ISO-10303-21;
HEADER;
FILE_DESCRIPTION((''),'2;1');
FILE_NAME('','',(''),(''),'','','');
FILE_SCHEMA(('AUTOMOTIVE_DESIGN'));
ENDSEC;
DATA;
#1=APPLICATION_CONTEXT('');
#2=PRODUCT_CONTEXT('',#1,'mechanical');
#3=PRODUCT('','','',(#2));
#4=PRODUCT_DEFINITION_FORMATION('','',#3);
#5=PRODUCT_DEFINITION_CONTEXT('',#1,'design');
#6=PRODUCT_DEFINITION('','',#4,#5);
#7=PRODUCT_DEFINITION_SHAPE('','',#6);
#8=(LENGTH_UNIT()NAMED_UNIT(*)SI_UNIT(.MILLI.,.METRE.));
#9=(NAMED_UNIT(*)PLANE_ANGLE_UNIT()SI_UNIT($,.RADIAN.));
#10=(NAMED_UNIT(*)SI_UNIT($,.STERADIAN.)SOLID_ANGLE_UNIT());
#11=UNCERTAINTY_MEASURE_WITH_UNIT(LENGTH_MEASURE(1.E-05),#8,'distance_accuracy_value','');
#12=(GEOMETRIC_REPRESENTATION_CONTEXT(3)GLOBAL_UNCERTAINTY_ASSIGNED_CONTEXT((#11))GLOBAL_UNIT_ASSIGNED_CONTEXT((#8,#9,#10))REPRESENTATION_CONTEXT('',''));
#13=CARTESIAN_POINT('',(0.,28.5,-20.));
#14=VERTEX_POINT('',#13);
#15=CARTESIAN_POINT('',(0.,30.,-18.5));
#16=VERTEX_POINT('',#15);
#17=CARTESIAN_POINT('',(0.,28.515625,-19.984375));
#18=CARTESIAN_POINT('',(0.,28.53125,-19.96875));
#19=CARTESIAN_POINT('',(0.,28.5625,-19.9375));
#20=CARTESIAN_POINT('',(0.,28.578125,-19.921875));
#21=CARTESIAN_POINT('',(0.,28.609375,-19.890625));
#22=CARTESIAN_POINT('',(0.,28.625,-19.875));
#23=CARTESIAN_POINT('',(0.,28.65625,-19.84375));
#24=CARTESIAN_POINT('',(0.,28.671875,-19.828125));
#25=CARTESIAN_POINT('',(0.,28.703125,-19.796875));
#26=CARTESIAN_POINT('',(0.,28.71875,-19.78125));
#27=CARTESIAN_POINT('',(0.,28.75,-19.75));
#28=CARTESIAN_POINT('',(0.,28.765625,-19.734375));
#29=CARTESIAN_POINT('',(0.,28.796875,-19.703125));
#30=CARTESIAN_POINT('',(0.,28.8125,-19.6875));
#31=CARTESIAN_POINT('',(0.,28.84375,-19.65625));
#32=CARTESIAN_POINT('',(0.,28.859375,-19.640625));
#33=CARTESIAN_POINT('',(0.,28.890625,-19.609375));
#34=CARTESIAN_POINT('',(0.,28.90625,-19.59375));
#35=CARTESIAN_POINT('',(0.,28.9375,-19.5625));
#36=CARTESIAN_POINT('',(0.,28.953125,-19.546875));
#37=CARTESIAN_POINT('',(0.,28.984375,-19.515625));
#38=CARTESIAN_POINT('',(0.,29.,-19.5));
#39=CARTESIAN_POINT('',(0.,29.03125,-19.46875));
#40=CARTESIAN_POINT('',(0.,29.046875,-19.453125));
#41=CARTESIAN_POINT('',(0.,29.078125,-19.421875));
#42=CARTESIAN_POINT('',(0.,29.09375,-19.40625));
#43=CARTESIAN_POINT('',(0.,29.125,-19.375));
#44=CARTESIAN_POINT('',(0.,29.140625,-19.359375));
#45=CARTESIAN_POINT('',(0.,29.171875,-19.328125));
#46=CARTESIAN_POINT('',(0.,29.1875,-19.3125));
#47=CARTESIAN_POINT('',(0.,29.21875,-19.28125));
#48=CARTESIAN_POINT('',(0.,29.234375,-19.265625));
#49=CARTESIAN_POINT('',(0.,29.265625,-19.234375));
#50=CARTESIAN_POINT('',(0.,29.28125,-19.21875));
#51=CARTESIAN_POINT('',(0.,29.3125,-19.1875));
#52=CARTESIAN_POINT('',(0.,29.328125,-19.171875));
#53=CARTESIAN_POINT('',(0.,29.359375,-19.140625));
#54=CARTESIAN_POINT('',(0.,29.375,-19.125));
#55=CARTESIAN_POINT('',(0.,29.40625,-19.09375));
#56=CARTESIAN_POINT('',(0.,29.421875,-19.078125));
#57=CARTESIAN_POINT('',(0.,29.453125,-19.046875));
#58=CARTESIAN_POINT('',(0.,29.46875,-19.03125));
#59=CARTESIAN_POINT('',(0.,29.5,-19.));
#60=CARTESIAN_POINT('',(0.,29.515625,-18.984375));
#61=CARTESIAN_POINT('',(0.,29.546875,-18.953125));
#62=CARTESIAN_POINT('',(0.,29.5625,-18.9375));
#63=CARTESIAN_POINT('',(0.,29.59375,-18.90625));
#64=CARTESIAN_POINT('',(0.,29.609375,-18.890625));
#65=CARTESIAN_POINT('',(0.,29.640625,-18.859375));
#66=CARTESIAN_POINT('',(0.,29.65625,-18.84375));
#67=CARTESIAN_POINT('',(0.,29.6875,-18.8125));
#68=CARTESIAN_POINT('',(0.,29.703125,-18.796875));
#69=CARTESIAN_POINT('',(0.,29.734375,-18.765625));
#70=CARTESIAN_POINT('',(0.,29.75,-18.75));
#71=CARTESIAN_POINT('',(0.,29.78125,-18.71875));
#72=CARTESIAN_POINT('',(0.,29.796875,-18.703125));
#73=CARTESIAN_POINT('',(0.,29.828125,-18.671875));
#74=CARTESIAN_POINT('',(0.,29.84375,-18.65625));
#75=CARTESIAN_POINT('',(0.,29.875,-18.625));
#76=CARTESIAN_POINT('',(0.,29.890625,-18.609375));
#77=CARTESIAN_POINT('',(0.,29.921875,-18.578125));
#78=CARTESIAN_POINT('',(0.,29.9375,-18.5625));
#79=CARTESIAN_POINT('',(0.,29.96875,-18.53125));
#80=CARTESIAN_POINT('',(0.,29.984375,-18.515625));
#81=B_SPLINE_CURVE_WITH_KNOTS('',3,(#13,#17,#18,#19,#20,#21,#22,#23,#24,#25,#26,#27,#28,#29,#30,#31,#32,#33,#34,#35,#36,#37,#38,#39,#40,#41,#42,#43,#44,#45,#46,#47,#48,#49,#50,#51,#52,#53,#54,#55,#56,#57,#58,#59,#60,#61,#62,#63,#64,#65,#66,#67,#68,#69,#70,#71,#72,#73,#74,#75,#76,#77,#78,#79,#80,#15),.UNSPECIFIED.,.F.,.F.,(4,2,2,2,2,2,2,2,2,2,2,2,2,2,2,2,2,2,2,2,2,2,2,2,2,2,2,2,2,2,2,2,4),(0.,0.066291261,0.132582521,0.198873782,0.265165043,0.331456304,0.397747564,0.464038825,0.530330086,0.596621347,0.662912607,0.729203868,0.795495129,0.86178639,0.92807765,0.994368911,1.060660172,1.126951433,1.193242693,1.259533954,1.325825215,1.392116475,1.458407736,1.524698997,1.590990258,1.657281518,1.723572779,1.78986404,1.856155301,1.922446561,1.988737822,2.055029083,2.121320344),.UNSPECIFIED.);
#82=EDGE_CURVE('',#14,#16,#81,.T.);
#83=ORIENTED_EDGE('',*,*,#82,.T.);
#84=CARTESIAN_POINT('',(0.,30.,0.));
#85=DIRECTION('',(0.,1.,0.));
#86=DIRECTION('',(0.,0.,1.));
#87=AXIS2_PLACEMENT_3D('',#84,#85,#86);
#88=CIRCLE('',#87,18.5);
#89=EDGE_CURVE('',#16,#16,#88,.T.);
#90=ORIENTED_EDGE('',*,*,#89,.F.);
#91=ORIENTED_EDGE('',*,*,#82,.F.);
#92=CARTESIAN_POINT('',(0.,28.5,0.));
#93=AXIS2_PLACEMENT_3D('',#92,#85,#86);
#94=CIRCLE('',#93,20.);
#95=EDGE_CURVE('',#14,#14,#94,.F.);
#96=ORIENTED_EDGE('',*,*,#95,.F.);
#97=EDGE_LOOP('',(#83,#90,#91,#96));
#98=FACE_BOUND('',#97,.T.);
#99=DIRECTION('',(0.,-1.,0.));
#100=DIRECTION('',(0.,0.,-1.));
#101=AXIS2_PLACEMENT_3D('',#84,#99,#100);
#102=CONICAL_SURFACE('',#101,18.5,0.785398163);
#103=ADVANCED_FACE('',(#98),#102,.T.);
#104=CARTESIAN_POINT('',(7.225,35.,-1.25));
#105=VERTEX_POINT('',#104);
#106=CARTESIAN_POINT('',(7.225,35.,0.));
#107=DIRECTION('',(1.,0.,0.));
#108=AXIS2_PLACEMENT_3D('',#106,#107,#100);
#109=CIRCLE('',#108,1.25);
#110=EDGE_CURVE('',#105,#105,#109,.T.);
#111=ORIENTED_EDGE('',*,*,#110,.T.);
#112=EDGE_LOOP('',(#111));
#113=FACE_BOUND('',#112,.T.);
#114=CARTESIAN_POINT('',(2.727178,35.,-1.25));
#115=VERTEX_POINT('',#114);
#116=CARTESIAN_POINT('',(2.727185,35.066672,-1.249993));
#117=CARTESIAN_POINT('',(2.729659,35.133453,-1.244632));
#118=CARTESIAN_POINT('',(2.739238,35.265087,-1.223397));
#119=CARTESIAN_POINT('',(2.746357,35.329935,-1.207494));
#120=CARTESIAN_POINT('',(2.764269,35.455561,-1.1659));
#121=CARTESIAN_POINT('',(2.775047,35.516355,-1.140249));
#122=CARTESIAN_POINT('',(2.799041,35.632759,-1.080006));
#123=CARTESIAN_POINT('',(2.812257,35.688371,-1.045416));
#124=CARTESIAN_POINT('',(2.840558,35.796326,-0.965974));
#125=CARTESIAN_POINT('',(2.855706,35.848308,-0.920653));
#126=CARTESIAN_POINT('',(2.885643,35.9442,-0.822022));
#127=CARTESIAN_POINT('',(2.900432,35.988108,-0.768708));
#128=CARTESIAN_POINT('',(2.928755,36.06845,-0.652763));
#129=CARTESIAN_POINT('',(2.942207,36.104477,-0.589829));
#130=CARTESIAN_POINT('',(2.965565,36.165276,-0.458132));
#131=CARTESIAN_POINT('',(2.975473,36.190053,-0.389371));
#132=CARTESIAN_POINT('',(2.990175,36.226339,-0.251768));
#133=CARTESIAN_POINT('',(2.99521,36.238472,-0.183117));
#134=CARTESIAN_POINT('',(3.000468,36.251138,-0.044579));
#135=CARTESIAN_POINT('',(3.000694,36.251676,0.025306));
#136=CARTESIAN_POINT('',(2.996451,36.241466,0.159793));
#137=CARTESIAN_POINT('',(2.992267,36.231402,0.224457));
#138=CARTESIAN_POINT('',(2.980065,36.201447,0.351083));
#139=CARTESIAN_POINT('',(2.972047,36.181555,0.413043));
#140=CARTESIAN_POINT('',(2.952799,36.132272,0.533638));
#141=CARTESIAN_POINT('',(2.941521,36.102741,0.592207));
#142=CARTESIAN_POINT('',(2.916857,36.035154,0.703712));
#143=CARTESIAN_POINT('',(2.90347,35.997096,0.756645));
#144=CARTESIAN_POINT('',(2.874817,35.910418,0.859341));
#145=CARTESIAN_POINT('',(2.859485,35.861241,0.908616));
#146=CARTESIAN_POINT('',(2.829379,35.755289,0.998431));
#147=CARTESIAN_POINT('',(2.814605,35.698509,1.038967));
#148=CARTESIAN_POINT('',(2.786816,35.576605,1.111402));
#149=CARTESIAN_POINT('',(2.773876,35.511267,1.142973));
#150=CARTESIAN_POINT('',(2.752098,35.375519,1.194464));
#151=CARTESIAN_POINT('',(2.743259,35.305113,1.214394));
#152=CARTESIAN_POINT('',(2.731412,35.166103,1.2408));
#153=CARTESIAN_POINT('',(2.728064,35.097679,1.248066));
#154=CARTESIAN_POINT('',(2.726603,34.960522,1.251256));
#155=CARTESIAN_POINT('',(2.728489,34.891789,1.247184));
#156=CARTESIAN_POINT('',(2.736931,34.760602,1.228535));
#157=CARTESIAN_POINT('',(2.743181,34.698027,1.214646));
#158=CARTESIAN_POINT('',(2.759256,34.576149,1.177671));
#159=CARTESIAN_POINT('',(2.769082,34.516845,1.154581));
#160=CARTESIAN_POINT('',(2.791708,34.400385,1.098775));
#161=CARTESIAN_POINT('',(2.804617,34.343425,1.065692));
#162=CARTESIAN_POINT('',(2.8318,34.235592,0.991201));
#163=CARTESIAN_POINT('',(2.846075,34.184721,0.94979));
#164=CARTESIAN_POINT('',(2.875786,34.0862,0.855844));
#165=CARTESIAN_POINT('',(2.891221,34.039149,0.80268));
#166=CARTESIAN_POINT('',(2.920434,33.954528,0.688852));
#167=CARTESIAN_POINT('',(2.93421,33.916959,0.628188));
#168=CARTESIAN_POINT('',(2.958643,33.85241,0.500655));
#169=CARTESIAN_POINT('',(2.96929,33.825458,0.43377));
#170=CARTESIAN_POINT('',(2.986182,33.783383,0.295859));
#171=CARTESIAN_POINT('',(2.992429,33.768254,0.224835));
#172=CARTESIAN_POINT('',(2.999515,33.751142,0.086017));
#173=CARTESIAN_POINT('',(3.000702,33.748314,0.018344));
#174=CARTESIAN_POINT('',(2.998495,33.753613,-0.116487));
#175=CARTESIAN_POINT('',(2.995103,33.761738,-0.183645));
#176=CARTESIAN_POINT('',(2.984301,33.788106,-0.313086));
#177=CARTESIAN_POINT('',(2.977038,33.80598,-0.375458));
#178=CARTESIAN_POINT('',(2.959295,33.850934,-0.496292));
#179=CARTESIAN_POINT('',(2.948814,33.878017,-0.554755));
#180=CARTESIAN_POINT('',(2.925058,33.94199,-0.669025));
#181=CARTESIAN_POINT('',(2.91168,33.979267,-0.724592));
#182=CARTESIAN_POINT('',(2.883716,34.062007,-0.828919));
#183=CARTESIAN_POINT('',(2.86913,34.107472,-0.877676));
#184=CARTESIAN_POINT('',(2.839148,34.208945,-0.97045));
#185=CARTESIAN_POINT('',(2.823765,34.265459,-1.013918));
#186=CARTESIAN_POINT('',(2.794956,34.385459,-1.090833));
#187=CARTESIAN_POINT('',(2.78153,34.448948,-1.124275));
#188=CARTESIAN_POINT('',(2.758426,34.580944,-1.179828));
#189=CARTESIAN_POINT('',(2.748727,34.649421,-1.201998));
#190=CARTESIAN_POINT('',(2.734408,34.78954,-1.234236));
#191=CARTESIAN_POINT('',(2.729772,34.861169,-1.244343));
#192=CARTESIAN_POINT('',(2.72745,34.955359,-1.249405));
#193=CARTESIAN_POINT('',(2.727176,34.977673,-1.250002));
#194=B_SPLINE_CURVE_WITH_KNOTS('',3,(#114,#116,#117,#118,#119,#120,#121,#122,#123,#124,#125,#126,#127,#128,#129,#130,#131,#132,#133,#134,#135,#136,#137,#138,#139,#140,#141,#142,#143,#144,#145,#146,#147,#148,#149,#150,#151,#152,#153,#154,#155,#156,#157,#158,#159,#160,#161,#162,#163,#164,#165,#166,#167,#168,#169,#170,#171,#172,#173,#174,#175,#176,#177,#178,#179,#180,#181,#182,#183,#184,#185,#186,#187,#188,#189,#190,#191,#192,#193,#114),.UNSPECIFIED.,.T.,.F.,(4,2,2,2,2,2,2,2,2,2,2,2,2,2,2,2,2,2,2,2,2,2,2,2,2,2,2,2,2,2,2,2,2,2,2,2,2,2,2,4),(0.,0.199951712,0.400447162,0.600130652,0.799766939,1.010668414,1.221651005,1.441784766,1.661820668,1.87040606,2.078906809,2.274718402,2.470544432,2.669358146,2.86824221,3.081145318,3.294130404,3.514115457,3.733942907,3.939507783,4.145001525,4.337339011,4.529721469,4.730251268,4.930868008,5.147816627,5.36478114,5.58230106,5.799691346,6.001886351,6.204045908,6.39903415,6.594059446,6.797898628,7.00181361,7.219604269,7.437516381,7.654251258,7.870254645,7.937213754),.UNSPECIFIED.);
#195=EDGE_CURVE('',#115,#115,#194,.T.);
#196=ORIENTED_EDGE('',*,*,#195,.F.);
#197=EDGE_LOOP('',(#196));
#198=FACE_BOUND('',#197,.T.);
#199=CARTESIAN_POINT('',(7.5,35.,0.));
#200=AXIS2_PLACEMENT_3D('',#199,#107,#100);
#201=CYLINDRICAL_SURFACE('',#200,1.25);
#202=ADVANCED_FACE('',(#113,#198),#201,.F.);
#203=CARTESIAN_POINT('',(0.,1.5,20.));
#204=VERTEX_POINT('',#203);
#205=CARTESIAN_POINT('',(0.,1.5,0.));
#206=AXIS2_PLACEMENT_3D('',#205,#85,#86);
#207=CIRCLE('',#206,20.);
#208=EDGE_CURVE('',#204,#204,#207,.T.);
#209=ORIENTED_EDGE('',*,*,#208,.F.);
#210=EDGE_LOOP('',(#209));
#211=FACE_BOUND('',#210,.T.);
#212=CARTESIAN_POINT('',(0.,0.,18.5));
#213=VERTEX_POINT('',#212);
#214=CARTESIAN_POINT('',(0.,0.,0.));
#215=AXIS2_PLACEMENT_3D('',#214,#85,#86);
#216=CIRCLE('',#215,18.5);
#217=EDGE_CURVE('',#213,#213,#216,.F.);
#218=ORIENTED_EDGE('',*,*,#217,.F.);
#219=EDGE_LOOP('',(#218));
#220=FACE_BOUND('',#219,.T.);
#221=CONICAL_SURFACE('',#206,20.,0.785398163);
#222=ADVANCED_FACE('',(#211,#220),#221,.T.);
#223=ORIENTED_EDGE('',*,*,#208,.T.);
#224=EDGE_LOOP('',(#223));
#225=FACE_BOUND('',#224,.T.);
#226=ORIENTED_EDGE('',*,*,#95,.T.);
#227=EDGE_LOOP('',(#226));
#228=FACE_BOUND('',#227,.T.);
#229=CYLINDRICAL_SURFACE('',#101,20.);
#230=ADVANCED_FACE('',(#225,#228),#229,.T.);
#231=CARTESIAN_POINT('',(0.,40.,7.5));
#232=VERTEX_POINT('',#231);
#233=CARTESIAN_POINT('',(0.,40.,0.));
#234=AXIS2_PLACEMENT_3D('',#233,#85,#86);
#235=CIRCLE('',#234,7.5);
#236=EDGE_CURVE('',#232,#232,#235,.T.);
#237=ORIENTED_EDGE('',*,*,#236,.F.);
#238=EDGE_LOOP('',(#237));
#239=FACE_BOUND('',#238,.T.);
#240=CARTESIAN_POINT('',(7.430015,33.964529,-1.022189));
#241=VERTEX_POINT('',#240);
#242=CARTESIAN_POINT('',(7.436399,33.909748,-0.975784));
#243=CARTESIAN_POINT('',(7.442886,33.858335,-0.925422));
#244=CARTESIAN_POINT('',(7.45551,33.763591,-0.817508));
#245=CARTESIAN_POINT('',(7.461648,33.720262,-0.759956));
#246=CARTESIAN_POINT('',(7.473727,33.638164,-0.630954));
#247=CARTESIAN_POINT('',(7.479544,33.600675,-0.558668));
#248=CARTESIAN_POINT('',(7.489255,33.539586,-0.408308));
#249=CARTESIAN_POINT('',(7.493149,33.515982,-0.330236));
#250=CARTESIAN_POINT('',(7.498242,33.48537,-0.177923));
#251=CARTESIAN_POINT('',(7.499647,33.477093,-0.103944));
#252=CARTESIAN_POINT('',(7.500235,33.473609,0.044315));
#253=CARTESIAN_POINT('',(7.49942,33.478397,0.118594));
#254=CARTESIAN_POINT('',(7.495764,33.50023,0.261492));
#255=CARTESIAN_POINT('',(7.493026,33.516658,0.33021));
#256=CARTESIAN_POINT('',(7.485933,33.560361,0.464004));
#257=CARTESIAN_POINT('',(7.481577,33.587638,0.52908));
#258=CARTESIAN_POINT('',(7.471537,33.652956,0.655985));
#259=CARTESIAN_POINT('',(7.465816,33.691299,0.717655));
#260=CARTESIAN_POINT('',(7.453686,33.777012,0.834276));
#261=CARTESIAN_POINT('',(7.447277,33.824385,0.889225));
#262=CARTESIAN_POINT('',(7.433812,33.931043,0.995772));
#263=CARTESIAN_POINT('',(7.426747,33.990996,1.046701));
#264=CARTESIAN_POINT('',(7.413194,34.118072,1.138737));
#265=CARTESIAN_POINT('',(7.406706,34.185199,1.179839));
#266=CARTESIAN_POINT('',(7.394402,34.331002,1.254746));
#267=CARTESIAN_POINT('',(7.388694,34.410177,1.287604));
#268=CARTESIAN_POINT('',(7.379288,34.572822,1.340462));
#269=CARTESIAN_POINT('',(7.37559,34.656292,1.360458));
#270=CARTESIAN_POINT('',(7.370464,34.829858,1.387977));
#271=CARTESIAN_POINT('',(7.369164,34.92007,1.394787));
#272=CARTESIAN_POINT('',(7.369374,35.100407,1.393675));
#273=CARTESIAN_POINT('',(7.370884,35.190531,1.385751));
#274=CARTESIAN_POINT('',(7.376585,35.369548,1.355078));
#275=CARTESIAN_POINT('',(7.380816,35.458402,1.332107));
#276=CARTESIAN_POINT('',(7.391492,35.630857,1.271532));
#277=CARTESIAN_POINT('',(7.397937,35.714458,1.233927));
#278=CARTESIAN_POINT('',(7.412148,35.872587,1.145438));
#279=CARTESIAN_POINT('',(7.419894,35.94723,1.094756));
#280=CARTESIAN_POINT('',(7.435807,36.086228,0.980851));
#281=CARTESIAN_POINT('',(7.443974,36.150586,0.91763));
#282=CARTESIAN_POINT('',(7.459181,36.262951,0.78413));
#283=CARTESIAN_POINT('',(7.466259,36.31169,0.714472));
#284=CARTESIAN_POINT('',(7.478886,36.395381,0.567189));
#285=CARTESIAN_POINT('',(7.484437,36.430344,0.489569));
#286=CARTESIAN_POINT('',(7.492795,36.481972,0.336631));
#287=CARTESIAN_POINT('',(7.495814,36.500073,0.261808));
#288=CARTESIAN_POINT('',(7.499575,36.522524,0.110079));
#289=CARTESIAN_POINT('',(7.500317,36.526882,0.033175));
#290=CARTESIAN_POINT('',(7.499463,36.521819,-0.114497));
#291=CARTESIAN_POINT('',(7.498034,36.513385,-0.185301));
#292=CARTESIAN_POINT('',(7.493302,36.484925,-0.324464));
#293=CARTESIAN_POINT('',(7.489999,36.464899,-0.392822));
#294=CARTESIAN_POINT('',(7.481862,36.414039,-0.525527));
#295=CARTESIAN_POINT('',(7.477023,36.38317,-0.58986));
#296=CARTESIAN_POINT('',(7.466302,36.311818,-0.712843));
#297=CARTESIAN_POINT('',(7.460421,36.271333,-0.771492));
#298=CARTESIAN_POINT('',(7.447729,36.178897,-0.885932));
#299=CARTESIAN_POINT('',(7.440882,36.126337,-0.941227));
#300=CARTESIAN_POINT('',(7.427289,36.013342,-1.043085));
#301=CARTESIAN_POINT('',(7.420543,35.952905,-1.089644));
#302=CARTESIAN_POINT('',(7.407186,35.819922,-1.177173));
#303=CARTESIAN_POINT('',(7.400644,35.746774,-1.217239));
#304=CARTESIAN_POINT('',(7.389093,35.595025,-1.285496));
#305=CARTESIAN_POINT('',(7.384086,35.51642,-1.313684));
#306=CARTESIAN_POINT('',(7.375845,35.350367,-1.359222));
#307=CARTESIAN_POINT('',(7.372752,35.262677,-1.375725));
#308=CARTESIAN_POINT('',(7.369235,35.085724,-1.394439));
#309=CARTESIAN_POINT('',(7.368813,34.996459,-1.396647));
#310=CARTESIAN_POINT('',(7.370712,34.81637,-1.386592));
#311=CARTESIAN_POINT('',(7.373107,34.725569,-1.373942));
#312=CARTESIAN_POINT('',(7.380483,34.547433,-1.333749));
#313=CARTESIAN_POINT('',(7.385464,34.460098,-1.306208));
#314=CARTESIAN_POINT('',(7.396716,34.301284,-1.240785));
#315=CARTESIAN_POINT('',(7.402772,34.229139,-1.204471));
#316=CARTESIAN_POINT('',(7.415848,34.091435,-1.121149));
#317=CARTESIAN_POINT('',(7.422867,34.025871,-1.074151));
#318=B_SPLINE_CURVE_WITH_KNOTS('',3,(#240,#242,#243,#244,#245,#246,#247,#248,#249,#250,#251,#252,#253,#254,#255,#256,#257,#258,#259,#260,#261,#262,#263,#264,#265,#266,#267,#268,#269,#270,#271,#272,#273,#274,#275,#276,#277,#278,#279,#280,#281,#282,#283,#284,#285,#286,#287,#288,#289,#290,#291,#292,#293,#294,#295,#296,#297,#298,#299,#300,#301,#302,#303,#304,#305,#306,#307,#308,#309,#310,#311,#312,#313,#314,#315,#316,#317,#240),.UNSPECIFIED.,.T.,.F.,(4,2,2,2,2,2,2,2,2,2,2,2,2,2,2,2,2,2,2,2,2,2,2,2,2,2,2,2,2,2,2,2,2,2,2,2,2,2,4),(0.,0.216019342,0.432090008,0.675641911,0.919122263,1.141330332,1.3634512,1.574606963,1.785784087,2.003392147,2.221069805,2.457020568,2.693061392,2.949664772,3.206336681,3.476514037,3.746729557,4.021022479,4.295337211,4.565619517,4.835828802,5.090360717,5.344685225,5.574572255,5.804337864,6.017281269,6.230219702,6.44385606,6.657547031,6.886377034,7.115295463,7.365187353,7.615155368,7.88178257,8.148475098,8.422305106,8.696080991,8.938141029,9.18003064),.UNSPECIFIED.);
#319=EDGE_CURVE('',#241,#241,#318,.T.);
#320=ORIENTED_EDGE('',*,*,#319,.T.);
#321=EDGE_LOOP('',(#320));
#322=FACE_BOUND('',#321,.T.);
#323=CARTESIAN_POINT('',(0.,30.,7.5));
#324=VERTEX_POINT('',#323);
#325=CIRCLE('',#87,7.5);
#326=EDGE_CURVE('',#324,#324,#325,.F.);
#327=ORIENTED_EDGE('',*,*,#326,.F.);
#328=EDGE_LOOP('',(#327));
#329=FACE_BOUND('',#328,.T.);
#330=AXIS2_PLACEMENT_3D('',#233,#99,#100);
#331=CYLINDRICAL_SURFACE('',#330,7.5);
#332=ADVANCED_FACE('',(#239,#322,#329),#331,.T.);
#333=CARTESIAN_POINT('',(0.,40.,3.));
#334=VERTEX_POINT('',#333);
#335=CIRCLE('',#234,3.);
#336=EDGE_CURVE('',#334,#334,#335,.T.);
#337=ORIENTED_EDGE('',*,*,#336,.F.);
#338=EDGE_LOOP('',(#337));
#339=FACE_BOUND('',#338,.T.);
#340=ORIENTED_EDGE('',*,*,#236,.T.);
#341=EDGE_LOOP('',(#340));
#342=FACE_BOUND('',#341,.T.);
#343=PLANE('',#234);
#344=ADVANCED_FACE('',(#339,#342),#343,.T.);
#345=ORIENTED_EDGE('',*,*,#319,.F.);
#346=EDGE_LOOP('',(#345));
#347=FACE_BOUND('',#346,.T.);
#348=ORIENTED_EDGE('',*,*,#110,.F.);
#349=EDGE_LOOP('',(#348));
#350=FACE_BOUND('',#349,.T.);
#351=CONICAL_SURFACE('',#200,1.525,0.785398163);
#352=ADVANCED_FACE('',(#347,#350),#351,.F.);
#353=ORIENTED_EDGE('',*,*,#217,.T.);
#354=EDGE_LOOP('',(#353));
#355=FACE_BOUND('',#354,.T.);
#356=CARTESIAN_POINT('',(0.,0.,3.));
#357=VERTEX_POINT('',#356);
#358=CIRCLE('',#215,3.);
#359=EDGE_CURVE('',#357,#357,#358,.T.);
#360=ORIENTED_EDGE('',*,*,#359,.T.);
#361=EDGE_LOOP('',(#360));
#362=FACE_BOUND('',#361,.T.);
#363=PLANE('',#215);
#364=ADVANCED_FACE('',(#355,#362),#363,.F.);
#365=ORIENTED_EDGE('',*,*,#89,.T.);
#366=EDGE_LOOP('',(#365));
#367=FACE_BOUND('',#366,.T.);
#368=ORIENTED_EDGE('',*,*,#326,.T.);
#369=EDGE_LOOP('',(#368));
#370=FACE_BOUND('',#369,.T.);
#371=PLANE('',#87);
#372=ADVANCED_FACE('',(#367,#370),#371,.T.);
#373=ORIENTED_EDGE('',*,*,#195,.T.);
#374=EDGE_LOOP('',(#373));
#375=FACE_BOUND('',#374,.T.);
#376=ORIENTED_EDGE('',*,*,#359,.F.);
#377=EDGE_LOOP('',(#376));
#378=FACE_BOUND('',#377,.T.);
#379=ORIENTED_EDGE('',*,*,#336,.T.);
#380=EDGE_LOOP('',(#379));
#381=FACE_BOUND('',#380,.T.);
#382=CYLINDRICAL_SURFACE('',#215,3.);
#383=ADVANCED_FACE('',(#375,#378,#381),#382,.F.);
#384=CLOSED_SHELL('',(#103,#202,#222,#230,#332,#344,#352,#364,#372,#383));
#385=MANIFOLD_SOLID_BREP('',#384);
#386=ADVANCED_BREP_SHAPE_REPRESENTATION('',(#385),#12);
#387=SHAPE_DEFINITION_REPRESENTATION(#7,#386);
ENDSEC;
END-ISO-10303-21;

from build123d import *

# Parameters (mm, degrees)
SKETCH2_R           = 20
BOSS_EXTRUDE1_DEPTH = 30
SKETCH6_R           = 7.5
BOSS_EXTRUDE3_DEPTH = 40
SKETCH7_R           = 3
CUT_EXTRUDE1_DEPTH  = 49.989794856
CHAMFER1_SIZE       = 1.5


# Read off the part's stored shape, not the designer's step: M3 Tapped Hole1
with BuildPart() as part:
    # Sketch2 → Boss-Extrude1 (new body)
    with BuildSketch(Plane(origin=(0, 0, 0), x_dir=(1, 0, 0), z_dir=(0, 1, 0))):
        with Locations(Location((0, 0, 0), (0, 0, 270))):
            Circle(SKETCH2_R)
    extrude(amount=BOSS_EXTRUDE1_DEPTH)

    # Sketch6 → Boss-Extrude3 (add)
    with BuildSketch(Plane(origin=(0, 0, 0), x_dir=(1, 0, 0), z_dir=(0, 1, 0))):
        with Locations(Location((0, 0, 0), (0, 0, 270))):
            Circle(SKETCH6_R)
    extrude(amount=BOSS_EXTRUDE3_DEPTH)

    # Sketch7 → Cut-Extrude1 (cut, through all)
    with BuildSketch(Plane(origin=(0, 40, 0), x_dir=(1, 0, 0), z_dir=(0, 1, 0))):
        with Locations(Location((0, 0, 0), (0, 0, 270))):
            Circle(SKETCH7_R)
    extrude(amount=-CUT_EXTRUDE1_DEPTH, mode=Mode.SUBTRACT)

    # M3 Tapped Hole1 outline → M3 Tapped Hole1 (revolve, cut)
    with BuildSketch(Plane(origin=(0, 35, 0), x_dir=(0, 1, 0), z_dir=(0, 0, -1))):
        Polygon((1.525048793, 7.500048793), (0, 7.500048793), (0, 2.72705461), (1.25, 2.72705461), (1.25, 7.225), align=None)
    revolve(axis=Axis((0, 35, 0), (1, 0, 0)), mode=Mode.SUBTRACT)

    # Chamfer1
    chamfer1_edges = [part.edges().sort_by_distance(p)[0] for p in [
        (0, 0, -20),
        (0, 30, -20),
    ]]
    chamfer(chamfer1_edges, length=CHAMFER1_SIZE)


solid = part.part
